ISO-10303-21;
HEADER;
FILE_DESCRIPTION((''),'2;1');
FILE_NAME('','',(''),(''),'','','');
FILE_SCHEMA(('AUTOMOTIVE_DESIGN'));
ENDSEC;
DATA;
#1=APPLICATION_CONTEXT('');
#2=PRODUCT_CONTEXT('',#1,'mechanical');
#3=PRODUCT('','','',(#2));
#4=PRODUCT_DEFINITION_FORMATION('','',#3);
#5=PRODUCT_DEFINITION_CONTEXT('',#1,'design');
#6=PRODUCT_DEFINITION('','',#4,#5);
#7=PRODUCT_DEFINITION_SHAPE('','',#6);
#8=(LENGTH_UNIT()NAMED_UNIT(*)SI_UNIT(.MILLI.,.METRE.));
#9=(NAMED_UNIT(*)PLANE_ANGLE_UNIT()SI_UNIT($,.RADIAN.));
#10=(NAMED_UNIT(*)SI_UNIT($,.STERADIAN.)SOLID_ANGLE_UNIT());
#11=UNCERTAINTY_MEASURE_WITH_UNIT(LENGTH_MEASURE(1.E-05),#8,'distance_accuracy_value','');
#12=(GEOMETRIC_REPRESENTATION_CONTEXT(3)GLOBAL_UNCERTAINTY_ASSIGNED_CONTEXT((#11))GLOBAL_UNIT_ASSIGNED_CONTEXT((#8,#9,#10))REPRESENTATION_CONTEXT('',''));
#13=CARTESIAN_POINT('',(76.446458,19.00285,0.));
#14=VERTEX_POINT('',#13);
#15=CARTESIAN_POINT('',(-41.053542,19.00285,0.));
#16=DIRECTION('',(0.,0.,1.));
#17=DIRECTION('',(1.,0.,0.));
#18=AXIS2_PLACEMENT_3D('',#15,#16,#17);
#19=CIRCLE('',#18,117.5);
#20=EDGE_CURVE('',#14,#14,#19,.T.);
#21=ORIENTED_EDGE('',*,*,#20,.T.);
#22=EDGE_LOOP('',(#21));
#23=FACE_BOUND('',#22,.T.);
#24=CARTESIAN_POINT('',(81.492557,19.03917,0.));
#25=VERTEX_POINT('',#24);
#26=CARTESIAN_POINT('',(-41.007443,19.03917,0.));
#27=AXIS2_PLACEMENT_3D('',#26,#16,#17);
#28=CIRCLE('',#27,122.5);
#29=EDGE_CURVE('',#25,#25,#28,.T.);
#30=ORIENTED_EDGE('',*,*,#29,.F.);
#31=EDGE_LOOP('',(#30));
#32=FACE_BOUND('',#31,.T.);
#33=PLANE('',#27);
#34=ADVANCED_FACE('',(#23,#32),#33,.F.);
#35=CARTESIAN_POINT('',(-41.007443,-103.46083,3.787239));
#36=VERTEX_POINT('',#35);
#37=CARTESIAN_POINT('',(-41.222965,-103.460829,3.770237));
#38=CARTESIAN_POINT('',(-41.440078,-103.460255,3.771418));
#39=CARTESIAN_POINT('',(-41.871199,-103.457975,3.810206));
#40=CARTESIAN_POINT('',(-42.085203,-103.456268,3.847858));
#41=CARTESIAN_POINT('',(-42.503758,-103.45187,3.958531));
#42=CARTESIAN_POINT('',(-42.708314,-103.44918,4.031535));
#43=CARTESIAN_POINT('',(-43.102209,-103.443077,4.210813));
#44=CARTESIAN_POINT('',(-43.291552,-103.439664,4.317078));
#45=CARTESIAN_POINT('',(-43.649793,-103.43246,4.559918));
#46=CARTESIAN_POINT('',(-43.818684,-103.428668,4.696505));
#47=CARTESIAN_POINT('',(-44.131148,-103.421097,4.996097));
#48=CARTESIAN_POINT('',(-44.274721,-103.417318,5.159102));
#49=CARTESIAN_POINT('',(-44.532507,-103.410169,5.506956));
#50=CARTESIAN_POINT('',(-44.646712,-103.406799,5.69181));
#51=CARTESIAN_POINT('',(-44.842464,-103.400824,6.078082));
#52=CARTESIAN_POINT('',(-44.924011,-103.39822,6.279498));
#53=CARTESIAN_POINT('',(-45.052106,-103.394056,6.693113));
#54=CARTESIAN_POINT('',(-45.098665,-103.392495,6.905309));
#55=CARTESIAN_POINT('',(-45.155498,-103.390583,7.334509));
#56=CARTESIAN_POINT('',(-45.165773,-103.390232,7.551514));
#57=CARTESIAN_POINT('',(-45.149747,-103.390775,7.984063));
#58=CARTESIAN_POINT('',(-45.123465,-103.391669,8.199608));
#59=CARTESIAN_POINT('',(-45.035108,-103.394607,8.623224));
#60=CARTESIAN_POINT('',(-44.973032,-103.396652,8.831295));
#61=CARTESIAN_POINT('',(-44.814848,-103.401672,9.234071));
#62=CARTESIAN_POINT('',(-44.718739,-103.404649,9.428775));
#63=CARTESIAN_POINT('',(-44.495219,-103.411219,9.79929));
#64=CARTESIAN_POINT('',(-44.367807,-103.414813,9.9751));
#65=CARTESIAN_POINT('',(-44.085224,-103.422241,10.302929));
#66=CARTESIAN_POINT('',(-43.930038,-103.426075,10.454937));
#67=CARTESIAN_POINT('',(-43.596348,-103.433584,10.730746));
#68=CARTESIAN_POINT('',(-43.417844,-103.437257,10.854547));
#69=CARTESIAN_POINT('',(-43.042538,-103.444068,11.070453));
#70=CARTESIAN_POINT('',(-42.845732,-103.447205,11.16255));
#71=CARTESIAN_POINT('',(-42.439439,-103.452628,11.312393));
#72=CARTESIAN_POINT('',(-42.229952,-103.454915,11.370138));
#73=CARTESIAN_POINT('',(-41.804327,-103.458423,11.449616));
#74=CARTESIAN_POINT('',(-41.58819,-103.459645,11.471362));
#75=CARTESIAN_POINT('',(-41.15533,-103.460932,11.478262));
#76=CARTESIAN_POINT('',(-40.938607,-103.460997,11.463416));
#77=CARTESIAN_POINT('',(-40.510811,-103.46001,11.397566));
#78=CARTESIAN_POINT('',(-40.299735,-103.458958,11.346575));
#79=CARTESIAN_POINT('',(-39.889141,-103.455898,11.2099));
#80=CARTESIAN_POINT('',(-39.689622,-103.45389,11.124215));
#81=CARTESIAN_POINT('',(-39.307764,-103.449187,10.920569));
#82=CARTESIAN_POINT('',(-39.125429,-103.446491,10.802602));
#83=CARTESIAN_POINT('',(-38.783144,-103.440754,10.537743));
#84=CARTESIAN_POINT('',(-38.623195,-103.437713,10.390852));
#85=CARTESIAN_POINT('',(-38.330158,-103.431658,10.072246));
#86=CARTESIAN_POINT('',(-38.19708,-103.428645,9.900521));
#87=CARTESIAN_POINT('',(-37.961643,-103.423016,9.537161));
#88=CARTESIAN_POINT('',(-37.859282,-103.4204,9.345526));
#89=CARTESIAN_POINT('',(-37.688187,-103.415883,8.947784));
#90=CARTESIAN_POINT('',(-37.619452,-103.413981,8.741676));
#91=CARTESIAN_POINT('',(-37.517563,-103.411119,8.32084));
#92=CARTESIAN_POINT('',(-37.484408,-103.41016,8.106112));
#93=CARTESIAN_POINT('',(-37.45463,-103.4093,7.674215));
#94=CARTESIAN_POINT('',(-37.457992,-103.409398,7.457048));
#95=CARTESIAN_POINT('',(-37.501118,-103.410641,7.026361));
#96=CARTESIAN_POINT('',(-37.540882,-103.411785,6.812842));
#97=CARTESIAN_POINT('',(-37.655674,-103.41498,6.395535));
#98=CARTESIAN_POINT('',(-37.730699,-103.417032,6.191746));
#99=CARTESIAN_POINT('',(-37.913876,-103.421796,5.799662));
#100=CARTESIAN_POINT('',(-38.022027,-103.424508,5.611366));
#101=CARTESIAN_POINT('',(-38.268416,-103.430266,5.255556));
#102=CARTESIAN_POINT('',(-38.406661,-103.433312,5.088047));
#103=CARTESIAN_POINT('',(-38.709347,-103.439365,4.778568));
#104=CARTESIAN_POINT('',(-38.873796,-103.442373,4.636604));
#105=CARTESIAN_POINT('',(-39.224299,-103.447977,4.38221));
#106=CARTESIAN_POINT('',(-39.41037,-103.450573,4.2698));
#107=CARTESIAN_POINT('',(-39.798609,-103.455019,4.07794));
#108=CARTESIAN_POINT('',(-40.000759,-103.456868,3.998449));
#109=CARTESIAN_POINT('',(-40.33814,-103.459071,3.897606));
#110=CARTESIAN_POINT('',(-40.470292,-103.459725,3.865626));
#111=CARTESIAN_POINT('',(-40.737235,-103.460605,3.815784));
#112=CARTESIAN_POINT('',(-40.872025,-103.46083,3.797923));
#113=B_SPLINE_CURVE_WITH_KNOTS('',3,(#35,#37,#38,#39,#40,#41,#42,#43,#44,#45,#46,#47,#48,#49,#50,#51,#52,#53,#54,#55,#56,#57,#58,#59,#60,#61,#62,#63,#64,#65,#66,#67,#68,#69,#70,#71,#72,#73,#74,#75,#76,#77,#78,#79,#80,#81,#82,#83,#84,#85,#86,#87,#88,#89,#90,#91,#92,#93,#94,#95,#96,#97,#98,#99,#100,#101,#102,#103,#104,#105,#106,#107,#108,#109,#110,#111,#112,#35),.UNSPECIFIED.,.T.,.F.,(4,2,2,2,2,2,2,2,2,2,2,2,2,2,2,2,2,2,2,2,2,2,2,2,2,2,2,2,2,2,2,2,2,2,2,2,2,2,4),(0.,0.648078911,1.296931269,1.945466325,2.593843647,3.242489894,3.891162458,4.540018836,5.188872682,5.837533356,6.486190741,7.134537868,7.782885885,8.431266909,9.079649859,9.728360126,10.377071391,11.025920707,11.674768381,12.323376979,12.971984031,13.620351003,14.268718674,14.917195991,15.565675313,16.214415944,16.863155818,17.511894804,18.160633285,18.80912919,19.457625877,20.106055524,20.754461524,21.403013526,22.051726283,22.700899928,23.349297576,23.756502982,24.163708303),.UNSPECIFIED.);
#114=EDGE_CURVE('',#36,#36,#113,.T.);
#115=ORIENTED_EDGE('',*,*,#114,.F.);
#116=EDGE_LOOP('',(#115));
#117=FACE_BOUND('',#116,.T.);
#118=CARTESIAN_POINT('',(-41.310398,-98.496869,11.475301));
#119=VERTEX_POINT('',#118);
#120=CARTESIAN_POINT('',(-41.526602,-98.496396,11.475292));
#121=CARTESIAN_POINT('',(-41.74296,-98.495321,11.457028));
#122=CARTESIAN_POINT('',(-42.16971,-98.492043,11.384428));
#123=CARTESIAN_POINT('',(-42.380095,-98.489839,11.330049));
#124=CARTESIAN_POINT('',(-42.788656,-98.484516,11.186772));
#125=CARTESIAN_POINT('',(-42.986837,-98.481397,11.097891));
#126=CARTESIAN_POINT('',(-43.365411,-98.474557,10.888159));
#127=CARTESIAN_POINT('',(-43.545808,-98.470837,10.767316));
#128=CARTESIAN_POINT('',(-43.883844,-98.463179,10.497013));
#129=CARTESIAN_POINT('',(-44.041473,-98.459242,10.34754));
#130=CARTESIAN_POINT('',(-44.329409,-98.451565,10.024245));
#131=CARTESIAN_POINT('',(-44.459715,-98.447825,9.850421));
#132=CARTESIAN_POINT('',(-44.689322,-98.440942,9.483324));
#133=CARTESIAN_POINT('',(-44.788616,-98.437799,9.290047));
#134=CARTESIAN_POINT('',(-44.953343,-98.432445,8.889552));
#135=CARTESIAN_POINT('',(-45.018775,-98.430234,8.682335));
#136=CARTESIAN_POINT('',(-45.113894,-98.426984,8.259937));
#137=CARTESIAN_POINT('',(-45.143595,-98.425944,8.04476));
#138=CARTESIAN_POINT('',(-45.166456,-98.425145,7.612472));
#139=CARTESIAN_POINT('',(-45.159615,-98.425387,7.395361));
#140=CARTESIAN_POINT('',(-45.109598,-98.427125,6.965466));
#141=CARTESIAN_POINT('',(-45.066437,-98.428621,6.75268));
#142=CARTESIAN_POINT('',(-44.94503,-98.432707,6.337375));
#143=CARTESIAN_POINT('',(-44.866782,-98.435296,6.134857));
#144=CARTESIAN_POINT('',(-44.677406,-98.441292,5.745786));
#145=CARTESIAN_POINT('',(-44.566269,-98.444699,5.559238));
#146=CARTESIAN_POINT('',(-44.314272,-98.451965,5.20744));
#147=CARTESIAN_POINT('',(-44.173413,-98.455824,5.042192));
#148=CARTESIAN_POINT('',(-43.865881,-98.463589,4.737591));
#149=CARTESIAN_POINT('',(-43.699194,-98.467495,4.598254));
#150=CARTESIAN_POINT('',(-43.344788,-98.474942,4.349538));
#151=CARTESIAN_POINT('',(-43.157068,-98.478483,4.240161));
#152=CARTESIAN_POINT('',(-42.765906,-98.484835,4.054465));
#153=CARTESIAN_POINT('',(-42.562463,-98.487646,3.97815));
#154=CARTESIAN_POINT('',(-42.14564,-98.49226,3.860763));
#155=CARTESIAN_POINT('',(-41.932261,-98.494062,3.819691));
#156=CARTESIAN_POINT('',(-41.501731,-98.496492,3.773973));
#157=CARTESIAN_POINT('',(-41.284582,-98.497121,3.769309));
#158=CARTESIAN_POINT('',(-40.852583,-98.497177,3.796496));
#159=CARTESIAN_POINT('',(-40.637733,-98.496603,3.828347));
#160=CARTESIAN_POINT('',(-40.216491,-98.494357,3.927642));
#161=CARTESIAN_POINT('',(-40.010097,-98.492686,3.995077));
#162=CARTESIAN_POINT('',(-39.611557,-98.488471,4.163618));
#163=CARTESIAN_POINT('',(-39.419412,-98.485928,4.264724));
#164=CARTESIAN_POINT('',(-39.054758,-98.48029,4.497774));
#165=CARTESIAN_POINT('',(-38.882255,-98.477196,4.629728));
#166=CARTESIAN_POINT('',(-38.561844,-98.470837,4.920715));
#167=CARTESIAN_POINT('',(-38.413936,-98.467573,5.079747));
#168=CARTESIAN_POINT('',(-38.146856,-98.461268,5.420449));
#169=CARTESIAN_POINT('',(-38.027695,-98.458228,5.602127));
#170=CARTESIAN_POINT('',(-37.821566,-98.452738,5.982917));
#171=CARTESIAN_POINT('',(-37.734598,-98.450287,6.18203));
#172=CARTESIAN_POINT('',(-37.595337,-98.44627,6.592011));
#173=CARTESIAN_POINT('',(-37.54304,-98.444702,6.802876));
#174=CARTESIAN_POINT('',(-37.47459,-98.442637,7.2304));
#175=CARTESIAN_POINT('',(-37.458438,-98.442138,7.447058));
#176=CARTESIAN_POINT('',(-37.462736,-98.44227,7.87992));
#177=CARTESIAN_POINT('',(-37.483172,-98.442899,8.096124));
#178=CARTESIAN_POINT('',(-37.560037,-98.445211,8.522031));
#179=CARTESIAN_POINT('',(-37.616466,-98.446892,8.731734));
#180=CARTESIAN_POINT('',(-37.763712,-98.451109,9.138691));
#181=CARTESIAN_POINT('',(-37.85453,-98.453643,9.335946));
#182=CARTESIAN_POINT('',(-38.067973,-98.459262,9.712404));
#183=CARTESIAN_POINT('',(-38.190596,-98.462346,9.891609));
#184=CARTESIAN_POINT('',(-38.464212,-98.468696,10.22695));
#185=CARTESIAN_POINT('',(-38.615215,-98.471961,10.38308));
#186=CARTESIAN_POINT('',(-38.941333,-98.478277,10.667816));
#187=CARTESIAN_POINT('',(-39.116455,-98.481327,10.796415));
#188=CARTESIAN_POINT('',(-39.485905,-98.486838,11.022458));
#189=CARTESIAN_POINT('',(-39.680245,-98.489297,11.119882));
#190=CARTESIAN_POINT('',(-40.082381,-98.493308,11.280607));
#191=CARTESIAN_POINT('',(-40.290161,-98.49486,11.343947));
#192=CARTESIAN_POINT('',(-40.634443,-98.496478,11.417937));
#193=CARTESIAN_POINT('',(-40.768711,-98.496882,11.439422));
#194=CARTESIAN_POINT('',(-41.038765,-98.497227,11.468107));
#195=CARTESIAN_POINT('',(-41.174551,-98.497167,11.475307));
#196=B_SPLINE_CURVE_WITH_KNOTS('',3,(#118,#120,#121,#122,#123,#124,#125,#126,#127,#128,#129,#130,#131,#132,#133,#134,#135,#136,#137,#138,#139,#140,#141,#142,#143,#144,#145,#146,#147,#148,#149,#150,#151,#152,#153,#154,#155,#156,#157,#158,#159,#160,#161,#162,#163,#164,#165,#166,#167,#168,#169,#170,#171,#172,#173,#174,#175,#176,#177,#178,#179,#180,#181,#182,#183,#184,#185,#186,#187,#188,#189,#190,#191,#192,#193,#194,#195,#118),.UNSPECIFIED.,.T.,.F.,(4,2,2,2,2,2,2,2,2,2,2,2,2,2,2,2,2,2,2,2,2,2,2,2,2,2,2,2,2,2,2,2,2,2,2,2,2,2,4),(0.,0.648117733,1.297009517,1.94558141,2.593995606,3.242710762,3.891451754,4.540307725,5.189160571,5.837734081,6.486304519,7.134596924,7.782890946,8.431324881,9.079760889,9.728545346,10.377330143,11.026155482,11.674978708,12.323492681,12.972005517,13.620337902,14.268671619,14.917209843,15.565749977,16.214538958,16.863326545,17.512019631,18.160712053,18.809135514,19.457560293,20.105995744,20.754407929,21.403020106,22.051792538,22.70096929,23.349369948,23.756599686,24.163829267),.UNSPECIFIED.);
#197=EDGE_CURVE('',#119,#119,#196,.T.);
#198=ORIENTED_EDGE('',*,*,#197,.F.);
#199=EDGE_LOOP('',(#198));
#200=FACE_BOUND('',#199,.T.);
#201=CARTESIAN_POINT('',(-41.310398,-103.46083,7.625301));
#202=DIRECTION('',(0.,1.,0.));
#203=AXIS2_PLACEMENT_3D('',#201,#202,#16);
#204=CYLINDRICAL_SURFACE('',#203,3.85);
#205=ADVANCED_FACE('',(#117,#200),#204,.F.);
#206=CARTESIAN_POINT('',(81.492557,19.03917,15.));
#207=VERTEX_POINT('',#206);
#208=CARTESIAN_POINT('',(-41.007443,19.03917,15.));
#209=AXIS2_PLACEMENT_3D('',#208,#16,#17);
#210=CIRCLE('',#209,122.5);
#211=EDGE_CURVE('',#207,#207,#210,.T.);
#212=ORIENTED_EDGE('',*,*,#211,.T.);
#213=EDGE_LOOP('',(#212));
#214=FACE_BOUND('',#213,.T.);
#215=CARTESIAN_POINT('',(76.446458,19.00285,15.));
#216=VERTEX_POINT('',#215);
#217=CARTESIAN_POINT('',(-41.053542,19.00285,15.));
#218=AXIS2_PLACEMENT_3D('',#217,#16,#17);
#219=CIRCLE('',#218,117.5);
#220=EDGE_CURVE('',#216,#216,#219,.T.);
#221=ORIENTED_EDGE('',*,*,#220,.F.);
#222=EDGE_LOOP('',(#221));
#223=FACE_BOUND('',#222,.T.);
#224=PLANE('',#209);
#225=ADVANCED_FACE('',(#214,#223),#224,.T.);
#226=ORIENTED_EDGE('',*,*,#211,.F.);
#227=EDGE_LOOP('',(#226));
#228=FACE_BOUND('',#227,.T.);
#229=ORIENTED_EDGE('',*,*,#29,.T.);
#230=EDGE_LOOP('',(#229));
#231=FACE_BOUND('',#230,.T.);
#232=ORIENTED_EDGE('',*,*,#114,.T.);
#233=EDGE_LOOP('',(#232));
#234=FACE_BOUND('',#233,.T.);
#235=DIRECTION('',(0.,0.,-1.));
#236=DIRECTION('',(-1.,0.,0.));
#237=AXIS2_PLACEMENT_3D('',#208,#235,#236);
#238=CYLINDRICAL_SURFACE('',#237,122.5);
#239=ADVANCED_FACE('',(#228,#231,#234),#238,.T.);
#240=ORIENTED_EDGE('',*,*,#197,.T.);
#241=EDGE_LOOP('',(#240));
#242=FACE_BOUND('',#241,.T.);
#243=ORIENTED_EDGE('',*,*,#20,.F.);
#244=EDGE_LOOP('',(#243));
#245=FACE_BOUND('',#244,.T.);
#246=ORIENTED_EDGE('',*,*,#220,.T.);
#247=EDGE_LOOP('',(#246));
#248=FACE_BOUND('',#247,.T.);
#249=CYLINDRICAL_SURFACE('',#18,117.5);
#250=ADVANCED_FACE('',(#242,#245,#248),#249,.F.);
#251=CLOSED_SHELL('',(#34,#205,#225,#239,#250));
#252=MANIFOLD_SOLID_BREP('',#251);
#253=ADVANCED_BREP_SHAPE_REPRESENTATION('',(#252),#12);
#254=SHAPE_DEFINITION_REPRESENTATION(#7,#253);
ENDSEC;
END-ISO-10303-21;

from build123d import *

# Parameters (mm, degrees)
ESQUISSE1_R             = 122.5
BOSS_EXTRU_1_DEPTH      = 15
ESQUISSE3D1_R           = 117.5
ENL_V_MAT_EXTRU_1_DEPTH = 21
ESQUISSE2_R             = 3.85
ENL_V_MAT_EXTRU_2_DEPTH = 217.77873659


with BuildPart() as part:
    # Esquisse1 → Boss.-Extru.1 (new body)
    with BuildSketch(Plane.XY):
        with Locations((-41.00744319, 19.039170053)):
            Circle(ESQUISSE1_R)
    extrude(amount=BOSS_EXTRU_1_DEPTH)

    # Esquisse3D1 → Enlèv. mat.-Extru.1 (cut)
    with BuildSketch(Plane(origin=(-41.053541595, 19.002849863, 0), x_dir=(1, 0, 0), z_dir=(0, 0, 1))):
        Circle(ESQUISSE3D1_R)
    extrude(amount=ENL_V_MAT_EXTRU_1_DEPTH, mode=Mode.SUBTRACT)

    # Esquisse2 → Enlèv. mat.-Extru.2 (cut, through all)
    with BuildSketch(Plane(origin=(0, 0, 0), x_dir=(1, 0, 0), z_dir=(0, 1, 0))):
        with Locations((-41.310397507, -7.625301321)):
            Circle(ESQUISSE2_R)
    extrude(amount=-ENL_V_MAT_EXTRU_2_DEPTH, mode=Mode.SUBTRACT)


solid = part.part
